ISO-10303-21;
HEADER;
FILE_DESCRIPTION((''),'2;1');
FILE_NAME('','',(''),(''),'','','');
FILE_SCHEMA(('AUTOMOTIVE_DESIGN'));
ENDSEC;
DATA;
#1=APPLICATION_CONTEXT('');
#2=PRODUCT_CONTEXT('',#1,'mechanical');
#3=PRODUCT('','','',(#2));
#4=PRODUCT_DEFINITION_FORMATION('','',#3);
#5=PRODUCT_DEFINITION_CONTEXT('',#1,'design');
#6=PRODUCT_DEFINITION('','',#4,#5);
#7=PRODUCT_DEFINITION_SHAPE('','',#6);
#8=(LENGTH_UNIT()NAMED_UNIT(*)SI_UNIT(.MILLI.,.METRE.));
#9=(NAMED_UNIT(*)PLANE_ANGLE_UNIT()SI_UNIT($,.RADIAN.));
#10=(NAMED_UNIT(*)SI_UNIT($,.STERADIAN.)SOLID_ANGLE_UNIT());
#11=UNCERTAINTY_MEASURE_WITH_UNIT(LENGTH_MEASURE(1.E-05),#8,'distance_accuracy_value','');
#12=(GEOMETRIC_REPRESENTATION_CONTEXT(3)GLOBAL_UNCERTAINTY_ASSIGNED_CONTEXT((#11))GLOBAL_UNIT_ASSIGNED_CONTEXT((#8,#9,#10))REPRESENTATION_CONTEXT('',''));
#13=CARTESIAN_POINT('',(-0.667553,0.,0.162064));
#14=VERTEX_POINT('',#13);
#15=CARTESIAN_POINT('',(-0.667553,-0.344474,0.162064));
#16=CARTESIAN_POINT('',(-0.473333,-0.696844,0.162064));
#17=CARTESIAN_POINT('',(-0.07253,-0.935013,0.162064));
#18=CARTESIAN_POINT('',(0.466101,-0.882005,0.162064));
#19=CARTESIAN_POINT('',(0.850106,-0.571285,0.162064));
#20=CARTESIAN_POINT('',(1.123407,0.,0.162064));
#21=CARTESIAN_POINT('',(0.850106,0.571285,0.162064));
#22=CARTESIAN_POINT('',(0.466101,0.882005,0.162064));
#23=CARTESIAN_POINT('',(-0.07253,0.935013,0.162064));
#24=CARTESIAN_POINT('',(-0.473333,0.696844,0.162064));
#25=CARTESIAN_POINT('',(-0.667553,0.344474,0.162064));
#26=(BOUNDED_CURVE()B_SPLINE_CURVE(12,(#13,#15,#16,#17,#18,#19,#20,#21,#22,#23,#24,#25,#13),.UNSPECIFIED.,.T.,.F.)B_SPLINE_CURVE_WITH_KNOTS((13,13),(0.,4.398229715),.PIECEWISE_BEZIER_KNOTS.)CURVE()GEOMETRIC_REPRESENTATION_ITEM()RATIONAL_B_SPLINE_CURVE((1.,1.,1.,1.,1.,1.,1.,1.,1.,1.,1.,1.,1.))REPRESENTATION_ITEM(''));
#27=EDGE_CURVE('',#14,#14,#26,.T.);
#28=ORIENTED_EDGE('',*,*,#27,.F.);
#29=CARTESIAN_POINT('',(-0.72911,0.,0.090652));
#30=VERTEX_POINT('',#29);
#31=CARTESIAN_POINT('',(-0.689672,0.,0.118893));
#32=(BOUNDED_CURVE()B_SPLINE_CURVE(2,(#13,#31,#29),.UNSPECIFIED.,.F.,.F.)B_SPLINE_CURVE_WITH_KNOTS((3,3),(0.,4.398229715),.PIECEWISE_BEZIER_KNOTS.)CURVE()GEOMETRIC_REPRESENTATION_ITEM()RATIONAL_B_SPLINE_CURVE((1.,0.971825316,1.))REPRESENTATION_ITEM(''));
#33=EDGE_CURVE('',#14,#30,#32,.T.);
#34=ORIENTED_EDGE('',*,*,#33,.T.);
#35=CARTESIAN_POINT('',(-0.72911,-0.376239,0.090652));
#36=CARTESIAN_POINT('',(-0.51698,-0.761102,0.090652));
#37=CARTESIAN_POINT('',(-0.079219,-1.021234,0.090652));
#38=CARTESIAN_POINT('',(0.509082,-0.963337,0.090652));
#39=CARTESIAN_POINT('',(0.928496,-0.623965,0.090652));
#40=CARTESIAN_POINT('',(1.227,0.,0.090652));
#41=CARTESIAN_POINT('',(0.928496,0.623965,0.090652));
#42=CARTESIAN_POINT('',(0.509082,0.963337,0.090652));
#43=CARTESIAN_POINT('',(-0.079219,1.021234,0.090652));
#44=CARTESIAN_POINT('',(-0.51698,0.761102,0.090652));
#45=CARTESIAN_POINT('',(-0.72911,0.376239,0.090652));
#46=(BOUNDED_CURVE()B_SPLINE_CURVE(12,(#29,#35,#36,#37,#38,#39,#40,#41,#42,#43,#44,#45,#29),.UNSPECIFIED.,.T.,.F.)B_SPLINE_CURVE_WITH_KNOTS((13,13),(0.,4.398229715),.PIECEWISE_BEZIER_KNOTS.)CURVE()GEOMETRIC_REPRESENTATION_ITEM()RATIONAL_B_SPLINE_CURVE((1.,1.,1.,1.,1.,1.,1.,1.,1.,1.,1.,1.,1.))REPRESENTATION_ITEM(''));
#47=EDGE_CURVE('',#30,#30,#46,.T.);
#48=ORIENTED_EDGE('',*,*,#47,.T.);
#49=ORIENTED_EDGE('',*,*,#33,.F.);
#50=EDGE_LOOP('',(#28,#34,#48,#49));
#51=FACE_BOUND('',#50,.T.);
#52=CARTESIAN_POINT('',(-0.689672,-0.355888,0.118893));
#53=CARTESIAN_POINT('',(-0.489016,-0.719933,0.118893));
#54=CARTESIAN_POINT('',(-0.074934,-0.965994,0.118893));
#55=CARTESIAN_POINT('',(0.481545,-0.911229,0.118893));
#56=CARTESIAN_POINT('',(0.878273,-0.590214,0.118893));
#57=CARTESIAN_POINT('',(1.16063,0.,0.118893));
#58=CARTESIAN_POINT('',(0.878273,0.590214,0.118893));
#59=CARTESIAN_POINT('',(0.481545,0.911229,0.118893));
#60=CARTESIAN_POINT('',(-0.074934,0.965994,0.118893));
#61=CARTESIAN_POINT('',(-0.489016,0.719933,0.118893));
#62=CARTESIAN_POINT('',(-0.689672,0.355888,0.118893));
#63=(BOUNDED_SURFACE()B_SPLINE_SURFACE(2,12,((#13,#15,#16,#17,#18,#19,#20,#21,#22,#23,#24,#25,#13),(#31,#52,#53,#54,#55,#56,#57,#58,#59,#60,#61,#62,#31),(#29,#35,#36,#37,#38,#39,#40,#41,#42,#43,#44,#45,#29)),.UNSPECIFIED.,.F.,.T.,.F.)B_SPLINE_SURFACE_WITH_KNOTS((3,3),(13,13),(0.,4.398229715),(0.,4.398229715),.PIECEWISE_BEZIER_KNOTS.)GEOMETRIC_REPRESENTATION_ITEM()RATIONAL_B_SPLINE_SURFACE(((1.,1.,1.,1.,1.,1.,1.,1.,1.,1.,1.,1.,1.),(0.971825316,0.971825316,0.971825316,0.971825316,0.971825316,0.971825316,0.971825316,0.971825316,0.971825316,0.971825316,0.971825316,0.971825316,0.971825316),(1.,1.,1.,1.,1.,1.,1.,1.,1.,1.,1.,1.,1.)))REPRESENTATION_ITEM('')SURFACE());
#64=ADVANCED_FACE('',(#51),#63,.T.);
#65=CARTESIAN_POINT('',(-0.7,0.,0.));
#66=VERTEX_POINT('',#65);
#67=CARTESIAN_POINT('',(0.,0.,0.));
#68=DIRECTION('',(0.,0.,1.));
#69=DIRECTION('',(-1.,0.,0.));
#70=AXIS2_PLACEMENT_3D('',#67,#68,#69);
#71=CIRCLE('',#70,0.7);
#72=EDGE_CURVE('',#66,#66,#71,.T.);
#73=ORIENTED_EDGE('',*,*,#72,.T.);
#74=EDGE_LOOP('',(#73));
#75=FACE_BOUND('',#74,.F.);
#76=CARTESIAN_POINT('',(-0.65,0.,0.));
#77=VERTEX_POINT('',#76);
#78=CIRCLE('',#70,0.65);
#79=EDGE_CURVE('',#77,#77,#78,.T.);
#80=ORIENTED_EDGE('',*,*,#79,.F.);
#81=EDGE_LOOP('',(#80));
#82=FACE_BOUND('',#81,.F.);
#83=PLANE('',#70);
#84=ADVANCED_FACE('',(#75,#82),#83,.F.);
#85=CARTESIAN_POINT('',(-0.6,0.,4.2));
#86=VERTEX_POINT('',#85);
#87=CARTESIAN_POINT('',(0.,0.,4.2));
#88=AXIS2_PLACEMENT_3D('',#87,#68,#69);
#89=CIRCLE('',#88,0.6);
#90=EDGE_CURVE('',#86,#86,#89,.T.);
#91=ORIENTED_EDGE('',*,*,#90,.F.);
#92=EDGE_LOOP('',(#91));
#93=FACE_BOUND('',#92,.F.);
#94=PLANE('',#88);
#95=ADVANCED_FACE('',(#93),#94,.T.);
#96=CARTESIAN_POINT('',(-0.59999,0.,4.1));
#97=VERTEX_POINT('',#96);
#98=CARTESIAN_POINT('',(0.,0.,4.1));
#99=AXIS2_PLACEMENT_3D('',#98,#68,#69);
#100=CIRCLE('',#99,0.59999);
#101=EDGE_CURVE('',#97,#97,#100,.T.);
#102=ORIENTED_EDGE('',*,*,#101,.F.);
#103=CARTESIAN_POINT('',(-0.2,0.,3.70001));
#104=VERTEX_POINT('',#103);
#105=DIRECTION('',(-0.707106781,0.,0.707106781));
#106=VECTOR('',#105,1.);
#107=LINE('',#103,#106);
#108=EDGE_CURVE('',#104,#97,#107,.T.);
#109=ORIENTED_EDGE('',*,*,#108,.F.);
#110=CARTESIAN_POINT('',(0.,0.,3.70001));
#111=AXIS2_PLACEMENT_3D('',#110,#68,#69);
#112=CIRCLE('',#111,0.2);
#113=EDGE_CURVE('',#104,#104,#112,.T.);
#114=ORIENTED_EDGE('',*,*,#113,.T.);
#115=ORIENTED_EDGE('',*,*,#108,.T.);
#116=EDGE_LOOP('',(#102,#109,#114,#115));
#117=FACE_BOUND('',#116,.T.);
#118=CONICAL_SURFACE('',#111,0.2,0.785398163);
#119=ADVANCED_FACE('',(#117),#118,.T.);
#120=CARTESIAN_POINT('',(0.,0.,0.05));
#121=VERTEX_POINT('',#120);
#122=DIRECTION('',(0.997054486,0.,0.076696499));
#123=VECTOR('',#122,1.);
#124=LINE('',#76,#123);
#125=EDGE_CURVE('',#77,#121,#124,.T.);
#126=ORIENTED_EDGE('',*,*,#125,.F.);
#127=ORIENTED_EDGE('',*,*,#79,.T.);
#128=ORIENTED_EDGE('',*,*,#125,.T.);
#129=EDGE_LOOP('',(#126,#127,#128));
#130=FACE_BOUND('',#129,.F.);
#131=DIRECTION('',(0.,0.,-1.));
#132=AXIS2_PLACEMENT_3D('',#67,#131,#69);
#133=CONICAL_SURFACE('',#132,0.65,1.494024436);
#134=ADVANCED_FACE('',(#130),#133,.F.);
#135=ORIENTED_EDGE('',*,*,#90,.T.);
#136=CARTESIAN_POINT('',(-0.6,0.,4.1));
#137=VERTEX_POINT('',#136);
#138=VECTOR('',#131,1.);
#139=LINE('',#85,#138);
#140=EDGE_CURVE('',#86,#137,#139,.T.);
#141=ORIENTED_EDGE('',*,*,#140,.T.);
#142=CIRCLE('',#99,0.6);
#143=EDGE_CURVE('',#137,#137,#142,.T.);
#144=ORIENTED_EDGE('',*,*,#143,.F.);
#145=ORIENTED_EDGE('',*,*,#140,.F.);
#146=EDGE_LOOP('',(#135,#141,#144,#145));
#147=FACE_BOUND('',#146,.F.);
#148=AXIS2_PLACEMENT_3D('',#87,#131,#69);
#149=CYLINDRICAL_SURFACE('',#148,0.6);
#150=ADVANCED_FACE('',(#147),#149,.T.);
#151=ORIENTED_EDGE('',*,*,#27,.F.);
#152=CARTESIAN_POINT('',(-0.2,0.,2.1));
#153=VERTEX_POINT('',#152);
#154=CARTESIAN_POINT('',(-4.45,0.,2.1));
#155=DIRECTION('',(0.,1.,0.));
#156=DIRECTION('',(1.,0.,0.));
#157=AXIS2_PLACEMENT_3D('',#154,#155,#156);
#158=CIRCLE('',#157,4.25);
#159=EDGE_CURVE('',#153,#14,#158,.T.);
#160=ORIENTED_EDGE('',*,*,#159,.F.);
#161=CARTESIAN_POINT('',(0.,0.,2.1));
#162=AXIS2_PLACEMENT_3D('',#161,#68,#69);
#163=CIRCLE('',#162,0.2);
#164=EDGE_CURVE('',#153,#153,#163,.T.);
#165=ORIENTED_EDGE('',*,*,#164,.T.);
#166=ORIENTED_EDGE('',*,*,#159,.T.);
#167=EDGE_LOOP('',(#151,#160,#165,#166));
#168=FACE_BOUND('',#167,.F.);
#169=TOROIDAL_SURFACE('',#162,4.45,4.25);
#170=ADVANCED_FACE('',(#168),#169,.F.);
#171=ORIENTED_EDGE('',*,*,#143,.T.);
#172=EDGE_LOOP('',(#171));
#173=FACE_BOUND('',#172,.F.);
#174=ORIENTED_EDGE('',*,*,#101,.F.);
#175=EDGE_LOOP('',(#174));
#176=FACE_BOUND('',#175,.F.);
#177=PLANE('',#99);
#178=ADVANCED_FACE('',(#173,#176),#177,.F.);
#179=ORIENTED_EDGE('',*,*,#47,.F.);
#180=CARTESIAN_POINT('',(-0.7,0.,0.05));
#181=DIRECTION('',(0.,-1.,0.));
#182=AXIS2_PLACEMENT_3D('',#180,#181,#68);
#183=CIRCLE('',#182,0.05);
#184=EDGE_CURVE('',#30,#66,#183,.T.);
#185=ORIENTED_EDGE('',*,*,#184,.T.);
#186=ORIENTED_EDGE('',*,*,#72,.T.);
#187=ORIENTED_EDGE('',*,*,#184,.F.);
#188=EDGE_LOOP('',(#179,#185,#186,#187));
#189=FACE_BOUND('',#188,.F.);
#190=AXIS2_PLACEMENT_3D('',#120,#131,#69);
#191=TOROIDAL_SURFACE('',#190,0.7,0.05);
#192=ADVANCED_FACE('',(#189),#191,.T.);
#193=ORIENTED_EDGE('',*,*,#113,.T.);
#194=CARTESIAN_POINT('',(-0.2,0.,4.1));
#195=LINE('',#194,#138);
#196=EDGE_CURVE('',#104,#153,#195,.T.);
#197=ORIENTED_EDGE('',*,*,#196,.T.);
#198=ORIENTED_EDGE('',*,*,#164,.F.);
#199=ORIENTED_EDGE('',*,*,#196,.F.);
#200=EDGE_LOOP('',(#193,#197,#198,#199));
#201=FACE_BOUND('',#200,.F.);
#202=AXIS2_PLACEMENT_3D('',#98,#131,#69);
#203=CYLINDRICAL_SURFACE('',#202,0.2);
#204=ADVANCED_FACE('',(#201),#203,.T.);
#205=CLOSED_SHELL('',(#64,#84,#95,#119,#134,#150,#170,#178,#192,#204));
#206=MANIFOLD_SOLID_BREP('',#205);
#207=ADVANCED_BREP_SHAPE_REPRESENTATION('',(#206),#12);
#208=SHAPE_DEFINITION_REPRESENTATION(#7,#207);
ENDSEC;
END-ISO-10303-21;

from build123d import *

# Parameters (mm, degrees)
F2_R    = 0.2
F3_SIZE = 0.39999


# Not quite as in the source:
# - a fillet or chamfer is up to 0.001 mm smaller than in the source, because OpenCascade refuses the exact size


with BuildPart() as f1:
    # F0 (on Front) → F1 (revolve)
    with BuildSketch(Plane.XZ):
        Polygon((-0.7, 0), (-0.65, 0), (0, 0.05), (0, 0.1), (-0.2, 0.1), (-0.7, 0.1), align=None)
        with BuildLine():
            ThreePointArc((-0.7, 0.1), (-0.75, 0.05), (-0.7, 0))
            Line((-0.7, 0), (-0.7, 0.1))
        make_face()
        with BuildLine():
            ThreePointArc((-0.2, 2.1), (-0.3268943744, 1.0692235936), (-0.7, 0.1))
            Line((-0.7, 0.1), (-0.2, 0.1))
            Line((-0.2, 0.1), (-0.2, 2.1))
        make_face()
        Polygon((-0.2, 0.1), (0, 0.1), (0, 4.1), (-0.2, 4.1), (-0.2, 2.1), align=None)
        Polygon((-0.2, 4.1), (0, 4.1), (0, 4.2), (-0.6, 4.2), (-0.6, 4.1), align=None)
    revolve(axis=Axis((0, 0, 2.1), (0, 0, 1)))

    # F2
    f2_edges = [f1.edges().sort_by_distance(p)[0] for p in [
        (0.7, 0, 0.1),
    ]]
    fillet(f2_edges, radius=F2_R)

    # F3 (size 0.4 in the source; OpenCascade refuses exactly that, so slightly less here)
    f3_edges = [f1.edges().sort_by_distance(p)[0] for p in [
        (0.2, 0, 4.1),
    ]]
    chamfer(f3_edges, length=F3_SIZE)


solid = f1.part
